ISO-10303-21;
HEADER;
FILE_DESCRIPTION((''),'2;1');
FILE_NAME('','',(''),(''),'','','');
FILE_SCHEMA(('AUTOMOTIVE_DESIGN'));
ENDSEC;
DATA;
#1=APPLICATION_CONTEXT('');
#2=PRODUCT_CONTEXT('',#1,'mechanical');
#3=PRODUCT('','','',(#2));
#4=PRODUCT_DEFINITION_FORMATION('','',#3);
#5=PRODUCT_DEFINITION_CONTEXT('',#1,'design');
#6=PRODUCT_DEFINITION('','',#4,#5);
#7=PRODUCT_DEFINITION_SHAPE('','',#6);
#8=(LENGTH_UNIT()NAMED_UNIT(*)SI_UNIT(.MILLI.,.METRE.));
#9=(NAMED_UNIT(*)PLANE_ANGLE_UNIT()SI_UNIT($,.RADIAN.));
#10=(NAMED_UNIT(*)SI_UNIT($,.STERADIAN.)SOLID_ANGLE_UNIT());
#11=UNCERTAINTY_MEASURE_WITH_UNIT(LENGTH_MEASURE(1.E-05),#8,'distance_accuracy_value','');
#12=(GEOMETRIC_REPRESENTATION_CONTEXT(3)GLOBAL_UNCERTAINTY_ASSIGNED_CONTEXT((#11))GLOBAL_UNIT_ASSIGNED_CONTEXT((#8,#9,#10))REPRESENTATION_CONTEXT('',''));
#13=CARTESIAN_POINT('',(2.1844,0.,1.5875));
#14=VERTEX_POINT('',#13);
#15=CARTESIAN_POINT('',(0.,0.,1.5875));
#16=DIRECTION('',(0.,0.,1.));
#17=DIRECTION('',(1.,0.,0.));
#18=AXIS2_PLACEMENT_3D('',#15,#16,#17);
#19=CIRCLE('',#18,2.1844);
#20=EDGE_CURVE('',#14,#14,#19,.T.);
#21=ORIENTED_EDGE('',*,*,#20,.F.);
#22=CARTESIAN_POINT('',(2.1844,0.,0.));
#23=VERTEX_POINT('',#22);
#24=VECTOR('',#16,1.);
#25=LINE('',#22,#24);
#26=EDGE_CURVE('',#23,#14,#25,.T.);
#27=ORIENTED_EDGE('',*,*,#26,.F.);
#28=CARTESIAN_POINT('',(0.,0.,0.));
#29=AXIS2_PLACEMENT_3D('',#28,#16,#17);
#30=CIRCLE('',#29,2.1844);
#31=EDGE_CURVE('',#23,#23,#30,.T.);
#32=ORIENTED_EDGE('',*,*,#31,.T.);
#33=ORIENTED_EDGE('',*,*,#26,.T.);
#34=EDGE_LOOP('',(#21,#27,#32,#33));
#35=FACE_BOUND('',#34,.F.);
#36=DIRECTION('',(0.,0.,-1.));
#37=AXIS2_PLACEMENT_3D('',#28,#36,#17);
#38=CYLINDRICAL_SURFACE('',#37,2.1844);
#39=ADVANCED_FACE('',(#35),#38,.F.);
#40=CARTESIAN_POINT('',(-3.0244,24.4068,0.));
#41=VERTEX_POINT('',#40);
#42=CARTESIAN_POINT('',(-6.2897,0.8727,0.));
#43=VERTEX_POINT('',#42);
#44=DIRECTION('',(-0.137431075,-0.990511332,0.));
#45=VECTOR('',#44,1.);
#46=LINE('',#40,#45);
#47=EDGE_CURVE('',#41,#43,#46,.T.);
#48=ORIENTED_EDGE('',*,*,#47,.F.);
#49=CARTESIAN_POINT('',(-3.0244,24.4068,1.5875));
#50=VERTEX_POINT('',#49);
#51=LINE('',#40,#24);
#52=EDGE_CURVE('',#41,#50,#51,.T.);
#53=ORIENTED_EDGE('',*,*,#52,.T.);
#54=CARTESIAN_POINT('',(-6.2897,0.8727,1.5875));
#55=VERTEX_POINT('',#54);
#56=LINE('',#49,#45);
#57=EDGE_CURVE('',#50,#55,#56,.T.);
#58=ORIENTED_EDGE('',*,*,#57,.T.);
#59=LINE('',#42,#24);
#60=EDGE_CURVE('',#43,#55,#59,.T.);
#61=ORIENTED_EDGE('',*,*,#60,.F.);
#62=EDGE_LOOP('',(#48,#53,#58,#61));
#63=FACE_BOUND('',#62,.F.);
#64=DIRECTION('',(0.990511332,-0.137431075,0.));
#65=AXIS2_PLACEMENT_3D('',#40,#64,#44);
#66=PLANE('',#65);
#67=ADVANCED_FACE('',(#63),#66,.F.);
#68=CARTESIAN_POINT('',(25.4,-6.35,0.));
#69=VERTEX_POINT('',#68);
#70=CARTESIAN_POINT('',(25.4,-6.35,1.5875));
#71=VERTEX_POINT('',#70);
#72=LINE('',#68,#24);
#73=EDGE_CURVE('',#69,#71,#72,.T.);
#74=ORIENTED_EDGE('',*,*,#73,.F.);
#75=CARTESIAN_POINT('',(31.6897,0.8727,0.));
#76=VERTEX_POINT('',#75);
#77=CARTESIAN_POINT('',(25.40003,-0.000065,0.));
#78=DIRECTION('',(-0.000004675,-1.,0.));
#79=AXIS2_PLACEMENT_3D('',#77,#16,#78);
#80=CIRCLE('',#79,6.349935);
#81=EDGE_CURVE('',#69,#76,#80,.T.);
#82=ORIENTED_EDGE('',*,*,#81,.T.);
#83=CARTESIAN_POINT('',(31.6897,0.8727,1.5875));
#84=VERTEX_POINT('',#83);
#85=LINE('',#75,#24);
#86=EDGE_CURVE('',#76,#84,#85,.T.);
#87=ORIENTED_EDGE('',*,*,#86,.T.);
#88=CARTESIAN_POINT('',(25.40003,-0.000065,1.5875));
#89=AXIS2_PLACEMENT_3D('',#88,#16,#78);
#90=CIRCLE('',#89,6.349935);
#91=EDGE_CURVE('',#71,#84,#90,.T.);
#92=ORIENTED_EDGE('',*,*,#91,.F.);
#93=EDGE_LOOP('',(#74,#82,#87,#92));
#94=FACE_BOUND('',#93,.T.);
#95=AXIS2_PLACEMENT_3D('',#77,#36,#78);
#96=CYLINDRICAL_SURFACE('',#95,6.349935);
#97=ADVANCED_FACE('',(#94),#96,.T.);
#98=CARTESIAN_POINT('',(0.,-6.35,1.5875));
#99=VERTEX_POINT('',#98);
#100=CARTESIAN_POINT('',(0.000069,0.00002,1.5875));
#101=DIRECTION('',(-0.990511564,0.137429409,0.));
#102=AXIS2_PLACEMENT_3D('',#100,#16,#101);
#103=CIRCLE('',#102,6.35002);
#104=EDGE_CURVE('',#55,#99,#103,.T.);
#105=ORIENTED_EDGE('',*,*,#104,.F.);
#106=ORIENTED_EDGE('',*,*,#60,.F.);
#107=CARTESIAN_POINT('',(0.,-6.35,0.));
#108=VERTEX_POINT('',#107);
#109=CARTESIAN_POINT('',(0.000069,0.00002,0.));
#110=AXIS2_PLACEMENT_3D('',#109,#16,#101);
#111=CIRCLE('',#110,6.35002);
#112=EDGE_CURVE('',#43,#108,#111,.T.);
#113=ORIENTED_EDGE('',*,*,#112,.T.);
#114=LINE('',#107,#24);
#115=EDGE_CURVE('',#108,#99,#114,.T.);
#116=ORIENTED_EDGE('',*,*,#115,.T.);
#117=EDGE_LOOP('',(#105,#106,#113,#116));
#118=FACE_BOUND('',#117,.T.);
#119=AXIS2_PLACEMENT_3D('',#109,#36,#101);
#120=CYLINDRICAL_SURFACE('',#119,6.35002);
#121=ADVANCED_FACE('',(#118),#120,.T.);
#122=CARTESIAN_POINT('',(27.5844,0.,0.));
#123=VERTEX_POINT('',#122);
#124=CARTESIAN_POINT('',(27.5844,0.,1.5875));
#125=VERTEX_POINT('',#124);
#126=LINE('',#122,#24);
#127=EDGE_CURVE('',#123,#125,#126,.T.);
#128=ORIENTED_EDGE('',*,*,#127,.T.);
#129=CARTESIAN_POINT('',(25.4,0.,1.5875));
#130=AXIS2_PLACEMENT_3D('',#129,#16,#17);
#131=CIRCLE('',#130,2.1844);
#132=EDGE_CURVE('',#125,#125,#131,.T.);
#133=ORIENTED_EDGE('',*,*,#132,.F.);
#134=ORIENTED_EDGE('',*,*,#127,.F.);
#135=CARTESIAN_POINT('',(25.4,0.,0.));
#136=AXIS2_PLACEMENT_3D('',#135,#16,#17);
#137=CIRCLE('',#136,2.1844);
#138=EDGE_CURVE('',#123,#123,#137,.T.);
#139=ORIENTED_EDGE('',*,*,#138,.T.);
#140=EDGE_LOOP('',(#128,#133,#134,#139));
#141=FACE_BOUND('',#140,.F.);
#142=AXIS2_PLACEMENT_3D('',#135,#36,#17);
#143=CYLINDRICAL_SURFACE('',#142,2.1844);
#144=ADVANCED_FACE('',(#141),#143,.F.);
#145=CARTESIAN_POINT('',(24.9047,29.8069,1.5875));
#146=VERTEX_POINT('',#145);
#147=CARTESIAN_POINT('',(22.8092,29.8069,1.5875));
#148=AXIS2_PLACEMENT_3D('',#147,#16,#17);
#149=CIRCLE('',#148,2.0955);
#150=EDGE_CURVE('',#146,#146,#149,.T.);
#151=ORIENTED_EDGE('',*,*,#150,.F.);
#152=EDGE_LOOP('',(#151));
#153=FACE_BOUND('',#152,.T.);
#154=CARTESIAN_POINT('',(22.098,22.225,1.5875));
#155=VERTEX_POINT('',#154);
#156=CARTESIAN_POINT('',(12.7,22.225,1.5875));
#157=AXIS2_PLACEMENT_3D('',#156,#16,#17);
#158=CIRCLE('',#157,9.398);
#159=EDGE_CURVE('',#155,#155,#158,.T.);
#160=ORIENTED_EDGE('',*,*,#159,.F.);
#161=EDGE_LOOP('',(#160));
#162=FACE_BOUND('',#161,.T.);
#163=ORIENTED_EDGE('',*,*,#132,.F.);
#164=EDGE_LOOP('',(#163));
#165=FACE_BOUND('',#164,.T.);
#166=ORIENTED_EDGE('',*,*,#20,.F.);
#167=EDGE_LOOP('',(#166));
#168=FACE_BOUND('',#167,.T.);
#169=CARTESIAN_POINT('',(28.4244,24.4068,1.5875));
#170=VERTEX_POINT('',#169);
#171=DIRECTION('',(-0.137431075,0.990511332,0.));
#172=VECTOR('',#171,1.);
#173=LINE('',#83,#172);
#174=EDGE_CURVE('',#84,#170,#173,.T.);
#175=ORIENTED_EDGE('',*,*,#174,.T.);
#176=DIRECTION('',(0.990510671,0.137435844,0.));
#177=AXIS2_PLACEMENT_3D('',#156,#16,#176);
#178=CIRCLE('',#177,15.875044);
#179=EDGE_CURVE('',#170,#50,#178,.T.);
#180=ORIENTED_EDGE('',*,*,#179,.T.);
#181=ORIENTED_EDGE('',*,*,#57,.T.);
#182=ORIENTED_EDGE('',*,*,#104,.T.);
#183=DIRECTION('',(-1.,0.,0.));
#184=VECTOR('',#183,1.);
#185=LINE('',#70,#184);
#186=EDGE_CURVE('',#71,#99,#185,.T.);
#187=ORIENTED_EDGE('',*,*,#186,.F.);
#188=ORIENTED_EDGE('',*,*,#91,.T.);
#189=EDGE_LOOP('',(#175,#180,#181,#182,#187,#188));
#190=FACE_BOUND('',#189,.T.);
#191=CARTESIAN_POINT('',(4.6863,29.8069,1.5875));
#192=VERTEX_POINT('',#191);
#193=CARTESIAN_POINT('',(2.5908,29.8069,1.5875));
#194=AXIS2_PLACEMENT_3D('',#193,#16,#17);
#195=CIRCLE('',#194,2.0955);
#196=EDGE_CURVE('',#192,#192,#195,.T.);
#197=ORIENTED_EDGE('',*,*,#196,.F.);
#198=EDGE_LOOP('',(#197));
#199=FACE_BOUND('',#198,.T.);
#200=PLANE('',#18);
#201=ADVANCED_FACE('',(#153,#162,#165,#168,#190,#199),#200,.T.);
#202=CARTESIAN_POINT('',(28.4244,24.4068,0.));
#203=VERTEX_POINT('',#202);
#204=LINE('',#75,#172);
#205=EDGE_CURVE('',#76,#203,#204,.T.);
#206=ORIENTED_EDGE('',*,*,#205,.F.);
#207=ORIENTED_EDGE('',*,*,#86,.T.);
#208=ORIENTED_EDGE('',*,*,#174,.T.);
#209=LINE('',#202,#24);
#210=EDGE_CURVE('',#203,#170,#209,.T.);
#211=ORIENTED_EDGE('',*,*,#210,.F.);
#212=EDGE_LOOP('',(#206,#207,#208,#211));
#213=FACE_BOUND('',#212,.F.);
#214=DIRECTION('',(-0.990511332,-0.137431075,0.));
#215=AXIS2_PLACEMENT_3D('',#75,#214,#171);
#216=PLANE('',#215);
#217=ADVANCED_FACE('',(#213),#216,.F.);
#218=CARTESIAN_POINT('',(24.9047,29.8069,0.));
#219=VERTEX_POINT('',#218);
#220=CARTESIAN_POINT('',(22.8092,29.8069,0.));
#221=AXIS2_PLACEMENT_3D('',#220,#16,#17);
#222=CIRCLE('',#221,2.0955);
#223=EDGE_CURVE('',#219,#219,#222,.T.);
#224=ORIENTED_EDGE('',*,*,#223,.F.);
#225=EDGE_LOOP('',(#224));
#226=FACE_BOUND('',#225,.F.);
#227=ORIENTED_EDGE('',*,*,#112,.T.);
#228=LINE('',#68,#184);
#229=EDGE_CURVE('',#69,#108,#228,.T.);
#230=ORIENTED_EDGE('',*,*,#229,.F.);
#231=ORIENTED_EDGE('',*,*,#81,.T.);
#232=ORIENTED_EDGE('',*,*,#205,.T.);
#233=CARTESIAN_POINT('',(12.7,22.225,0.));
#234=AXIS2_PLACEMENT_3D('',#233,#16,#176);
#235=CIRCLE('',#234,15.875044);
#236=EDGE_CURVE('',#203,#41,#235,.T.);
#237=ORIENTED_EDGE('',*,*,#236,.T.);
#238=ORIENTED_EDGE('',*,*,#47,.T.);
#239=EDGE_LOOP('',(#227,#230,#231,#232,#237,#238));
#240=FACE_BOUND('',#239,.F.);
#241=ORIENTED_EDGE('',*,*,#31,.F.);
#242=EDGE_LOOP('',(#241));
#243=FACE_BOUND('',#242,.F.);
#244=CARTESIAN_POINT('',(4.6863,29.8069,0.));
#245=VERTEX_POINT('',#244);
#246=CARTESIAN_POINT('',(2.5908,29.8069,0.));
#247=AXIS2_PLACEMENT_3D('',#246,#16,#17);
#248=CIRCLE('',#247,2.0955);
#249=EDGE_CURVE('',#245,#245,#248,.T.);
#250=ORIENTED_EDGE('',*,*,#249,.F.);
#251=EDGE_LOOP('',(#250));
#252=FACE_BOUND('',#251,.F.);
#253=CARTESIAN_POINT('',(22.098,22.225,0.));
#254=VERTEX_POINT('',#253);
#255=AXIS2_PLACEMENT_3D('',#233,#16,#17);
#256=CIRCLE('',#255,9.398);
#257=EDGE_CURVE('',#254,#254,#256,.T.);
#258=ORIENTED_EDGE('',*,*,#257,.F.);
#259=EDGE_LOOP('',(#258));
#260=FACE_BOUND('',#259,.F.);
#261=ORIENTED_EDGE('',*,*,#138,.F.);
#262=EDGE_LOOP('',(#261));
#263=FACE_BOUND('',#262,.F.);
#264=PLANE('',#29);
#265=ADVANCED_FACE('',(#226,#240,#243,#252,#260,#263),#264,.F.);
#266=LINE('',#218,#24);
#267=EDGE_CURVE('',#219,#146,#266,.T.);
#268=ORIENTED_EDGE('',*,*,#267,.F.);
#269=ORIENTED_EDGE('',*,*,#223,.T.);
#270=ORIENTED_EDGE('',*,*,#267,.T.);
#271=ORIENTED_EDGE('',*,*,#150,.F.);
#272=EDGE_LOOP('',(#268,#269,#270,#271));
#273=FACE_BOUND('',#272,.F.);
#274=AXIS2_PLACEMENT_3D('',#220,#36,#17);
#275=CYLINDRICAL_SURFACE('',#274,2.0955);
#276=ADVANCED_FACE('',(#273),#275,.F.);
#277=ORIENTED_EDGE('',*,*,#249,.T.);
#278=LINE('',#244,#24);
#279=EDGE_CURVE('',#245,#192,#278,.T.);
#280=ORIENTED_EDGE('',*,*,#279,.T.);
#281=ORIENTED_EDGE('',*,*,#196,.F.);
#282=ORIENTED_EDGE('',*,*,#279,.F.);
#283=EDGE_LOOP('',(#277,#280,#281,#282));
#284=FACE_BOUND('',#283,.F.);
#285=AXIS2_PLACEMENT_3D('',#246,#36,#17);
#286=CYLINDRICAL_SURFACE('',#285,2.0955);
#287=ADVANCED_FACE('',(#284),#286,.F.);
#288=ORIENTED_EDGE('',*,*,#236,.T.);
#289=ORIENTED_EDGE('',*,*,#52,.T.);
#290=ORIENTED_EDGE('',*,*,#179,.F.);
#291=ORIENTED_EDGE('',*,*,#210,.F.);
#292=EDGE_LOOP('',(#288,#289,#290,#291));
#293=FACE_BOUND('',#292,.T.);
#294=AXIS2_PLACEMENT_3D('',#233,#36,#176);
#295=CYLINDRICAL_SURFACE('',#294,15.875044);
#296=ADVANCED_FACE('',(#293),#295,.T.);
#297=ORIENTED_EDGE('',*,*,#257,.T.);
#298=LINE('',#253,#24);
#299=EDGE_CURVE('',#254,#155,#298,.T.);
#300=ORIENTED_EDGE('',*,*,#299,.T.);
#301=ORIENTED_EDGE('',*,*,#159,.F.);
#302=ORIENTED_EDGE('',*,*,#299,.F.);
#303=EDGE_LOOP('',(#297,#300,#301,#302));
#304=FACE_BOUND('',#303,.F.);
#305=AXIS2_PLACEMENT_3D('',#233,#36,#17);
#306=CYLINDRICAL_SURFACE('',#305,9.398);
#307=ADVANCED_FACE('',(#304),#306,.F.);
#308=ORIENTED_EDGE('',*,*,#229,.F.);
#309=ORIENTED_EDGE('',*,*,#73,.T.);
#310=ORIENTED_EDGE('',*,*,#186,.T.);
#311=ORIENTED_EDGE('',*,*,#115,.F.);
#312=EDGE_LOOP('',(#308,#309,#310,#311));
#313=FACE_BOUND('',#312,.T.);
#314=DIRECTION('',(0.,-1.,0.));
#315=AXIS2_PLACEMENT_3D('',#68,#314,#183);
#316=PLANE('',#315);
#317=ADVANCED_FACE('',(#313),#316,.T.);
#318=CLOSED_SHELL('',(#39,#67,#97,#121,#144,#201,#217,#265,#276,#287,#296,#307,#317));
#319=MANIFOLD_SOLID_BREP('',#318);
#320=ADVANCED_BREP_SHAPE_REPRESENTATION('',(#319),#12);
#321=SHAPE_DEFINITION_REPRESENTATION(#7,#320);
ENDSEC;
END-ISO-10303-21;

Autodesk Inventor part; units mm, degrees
ref_plane "YZ Plane" through (0, 0, 0) normal (1, 0, 0) x (0, 1, 0)
ref_plane "XZ Plane" through (0, 0, 0) normal (0, 1, 0) x (-1, 0, 0)
ref_plane "XY Plane" through (0, 0, 0) normal (0, 0, 1) x (1, 0, 0)
sketch "main" plane through (0, 0, 0) normal (0, 0, 1) x (1, 0, 0)
  circle A0 centre (70.448, 399.2567) radius 2.1844
  circle A1 centre (95.848, 399.2567) radius 2.1844
  circle A2 centre (83.148, 421.4817) radius 9.398
  arc A3 (95.848, 392.9067) -> (102.1377, 400.1294) centre (95.848, 399.2567) ccw
  arc A4 (64.1582, 400.1294) -> (70.448, 392.9067) centre (70.448, 399.2567) ccw
  line L0 (95.848, 392.9067) -> (70.448, 392.9067)
  arc A5 (98.8723, 423.6635) -> (67.4236, 423.6635) centre (83.148, 421.4817) ccw
  line L1 (102.1377, 400.1294) -> (98.8723, 423.6635)
  line L2 (67.4236, 423.6635) -> (64.1582, 400.1294)
  point P0 (83.148, 405.9327)
  dimension "d0" = 18.796
  dimension "d1" = 12.7
  dimension "d2" = 12.7
sketch "Sketch1" plane through (0, 0, 0) normal (0, 0, 1) x (1, 0, 0)
  circle A0 centre (2.5908, 29.8069) radius 2.0955
  circle A1 centre (22.8092, 29.8069) radius 2.0955
  circle A2 centre (0, 0) radius 2.1844
  circle A3 centre (25.4, 0) radius 2.1844
  circle A4 centre (12.7, 22.225) radius 9.398
  arc A5 (25.4, -6.35) -> (31.6897, 0.8727) centre (25.4, 0) ccw
  arc A6 (-6.2897, 0.8727) -> (0, -6.35) centre (0, 0) ccw
  line L0 (25.4, -6.35) -> (0, -6.35)
  arc A7 (28.4244, 24.4068) -> (-3.0244, 24.4068) centre (12.7, 22.225) ccw
  line L1 (31.6897, 0.8727) -> (28.4244, 24.4068)
  line L2 (-3.0244, 24.4068) -> (-6.2897, 0.8727)
  dimension "d5" = 4.191
  dimension "d6" = 4.191
extrude "Extrusion1" add sketch "Sketch1" along normal blind 1.5875
properties part number "resevoir_mount" material "Acetal Resin, White"
